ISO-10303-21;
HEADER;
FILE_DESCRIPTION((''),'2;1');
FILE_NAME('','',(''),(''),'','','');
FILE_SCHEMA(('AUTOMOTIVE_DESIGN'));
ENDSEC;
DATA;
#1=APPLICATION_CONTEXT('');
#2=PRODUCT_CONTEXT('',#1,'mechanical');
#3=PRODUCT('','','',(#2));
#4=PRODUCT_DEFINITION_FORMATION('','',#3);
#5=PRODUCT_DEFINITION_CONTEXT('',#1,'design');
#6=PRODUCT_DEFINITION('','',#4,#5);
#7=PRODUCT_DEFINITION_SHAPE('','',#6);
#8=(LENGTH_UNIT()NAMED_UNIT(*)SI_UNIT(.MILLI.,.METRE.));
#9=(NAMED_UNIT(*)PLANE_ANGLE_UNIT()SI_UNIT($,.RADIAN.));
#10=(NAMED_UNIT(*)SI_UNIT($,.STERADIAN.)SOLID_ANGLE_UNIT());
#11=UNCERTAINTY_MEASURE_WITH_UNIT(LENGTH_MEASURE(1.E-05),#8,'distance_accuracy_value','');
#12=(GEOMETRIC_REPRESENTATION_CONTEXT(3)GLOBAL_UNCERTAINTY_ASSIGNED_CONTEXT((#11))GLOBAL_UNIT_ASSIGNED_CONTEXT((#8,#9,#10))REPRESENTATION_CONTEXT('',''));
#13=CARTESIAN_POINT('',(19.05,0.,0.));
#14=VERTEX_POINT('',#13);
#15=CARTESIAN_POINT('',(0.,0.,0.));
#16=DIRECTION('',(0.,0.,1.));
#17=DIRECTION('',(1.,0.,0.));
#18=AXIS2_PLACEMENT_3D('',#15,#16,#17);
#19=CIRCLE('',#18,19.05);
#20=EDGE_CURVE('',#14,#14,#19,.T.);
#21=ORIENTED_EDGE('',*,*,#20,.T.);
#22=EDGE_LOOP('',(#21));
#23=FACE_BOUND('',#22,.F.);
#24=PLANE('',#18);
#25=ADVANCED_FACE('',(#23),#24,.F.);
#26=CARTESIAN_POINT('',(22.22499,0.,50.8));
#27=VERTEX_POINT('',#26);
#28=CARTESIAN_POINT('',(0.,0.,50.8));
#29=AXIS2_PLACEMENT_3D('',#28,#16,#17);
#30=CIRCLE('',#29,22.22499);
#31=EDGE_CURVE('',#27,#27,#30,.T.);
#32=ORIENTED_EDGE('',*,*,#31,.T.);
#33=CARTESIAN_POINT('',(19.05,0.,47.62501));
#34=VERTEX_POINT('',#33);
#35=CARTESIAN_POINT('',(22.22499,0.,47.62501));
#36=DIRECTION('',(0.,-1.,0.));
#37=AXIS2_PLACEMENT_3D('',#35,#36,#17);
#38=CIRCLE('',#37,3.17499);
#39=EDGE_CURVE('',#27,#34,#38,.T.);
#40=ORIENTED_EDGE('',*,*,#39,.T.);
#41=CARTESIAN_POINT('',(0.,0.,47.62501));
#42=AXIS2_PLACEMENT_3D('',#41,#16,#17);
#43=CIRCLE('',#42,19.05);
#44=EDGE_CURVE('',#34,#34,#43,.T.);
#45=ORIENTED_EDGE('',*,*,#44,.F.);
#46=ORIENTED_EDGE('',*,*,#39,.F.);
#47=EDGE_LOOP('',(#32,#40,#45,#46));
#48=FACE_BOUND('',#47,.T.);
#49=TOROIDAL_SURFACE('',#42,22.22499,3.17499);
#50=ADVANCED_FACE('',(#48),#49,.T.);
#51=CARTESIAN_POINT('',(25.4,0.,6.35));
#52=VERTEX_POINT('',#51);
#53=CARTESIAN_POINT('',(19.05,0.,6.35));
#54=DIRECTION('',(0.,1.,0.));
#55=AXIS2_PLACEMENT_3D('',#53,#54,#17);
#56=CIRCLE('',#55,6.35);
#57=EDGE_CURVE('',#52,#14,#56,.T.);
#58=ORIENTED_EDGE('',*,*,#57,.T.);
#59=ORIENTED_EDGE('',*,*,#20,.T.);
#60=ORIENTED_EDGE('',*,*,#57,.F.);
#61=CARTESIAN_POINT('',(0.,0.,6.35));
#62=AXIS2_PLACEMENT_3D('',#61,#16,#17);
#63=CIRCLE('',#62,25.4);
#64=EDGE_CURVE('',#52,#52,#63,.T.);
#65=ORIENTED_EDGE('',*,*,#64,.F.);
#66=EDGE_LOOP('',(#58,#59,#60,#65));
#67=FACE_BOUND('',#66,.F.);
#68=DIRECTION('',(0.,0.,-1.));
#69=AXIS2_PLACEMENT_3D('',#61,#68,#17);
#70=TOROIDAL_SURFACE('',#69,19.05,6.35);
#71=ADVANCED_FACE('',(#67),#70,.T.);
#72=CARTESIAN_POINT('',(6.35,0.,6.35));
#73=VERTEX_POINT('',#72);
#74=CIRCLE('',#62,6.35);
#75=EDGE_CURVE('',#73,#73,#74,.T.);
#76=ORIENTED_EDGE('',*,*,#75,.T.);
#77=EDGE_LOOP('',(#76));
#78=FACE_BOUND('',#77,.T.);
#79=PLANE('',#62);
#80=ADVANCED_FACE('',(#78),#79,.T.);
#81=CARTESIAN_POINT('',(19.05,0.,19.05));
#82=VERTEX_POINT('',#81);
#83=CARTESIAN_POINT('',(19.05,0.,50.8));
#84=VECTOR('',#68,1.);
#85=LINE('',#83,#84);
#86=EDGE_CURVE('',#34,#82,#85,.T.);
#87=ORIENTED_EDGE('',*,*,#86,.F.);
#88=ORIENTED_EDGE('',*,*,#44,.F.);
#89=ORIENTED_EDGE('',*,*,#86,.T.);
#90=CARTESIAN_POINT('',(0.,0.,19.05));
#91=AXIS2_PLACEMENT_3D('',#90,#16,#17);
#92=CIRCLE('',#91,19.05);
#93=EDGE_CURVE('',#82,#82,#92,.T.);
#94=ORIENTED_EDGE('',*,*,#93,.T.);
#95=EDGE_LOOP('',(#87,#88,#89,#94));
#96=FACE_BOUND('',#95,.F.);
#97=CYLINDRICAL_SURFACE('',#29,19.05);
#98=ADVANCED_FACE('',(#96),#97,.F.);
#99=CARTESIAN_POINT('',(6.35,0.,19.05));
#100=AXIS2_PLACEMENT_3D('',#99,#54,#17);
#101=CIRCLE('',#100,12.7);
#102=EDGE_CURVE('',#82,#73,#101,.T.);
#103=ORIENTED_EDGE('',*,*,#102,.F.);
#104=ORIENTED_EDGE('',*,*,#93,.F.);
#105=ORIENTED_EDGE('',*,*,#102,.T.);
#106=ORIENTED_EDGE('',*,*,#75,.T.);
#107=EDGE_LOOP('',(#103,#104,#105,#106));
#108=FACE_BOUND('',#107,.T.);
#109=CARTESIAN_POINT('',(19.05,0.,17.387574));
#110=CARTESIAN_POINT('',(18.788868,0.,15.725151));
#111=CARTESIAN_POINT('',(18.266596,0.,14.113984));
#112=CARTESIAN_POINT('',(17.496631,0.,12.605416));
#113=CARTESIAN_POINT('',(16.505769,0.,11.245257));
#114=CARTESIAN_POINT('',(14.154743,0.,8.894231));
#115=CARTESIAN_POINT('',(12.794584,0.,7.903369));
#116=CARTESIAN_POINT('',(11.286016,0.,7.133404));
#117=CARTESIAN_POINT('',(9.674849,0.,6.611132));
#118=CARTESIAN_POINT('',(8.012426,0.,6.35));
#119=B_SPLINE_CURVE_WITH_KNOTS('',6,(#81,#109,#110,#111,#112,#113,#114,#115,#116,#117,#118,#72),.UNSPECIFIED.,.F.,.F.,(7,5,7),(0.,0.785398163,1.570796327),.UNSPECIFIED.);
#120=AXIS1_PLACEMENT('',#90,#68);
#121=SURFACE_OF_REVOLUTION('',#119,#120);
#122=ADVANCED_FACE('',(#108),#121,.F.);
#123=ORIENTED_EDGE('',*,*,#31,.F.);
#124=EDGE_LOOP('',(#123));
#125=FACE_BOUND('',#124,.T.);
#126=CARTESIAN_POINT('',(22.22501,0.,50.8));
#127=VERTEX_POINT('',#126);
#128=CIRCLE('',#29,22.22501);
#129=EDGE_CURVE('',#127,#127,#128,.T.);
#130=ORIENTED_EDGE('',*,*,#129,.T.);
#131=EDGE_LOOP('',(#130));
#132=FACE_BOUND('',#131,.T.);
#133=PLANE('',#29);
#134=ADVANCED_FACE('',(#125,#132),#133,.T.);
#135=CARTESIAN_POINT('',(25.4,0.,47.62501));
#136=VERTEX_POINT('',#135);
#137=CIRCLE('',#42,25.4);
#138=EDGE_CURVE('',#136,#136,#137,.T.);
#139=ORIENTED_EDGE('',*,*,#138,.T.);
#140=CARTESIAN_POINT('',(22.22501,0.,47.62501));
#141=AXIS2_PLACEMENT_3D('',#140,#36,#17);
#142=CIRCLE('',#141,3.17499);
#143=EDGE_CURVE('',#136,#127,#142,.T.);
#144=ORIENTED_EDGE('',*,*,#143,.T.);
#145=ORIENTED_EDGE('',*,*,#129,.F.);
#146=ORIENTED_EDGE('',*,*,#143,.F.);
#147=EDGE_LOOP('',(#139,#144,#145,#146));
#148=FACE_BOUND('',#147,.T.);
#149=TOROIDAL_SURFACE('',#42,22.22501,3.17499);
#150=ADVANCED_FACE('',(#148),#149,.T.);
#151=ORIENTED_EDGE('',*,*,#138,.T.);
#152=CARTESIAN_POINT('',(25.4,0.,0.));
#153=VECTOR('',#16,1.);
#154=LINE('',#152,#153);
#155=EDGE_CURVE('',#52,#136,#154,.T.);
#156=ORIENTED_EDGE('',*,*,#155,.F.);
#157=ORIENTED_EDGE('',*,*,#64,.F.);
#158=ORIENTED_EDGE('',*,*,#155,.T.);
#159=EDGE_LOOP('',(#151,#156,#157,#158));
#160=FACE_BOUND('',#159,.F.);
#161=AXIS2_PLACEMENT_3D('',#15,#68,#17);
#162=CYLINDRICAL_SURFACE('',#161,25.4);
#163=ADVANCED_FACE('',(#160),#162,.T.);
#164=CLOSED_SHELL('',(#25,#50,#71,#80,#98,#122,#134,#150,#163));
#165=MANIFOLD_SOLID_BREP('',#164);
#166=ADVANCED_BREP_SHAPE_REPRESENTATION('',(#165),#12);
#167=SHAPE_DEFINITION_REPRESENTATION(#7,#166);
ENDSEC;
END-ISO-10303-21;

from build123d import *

# Parameters (mm, degrees)
F0_R     = 25.4
F1_DEPTH = 50.8
F2_R     = 19.05
F3_DEPTH = 44.45
F4_R     = 3.17499
F5_R     = 12.7
F6_R     = 6.35


# Not quite as in the source:
# - a fillet or chamfer is up to 0.001 mm smaller than in the source, because OpenCascade refuses the exact size


with BuildPart() as f1:
    # F0 (on Top) → F1 (new body)
    with BuildSketch(Plane.XY):
        Circle(F0_R)
    extrude(amount=F1_DEPTH)

    # F2 (on face) → F3 (cut)
    with BuildSketch(Plane.XY.offset(50.8)):
        Circle(F2_R)
    extrude(amount=-F3_DEPTH, mode=Mode.SUBTRACT)

    # F4 (radius 3.175 in the source; OpenCascade refuses exactly that, so slightly less here)
    f4_edges = [f1.edges().sort_by_distance(p)[0] for p in [
        (-25.4, 0, 50.8),
        (-19.05, 0, 50.8),
    ]]
    fillet(f4_edges, radius=F4_R)

    # F5
    f5_edges = [f1.edges().sort_by_distance(p)[0] for p in [
        (-19.05, 0, 6.35),
    ]]
    fillet(f5_edges, radius=F5_R)

    # F6
    f6_edges = [f1.edges().sort_by_distance(p)[0] for p in [
        (-25.4, 0, 0),
    ]]
    fillet(f6_edges, radius=F6_R)


solid = f1.part
